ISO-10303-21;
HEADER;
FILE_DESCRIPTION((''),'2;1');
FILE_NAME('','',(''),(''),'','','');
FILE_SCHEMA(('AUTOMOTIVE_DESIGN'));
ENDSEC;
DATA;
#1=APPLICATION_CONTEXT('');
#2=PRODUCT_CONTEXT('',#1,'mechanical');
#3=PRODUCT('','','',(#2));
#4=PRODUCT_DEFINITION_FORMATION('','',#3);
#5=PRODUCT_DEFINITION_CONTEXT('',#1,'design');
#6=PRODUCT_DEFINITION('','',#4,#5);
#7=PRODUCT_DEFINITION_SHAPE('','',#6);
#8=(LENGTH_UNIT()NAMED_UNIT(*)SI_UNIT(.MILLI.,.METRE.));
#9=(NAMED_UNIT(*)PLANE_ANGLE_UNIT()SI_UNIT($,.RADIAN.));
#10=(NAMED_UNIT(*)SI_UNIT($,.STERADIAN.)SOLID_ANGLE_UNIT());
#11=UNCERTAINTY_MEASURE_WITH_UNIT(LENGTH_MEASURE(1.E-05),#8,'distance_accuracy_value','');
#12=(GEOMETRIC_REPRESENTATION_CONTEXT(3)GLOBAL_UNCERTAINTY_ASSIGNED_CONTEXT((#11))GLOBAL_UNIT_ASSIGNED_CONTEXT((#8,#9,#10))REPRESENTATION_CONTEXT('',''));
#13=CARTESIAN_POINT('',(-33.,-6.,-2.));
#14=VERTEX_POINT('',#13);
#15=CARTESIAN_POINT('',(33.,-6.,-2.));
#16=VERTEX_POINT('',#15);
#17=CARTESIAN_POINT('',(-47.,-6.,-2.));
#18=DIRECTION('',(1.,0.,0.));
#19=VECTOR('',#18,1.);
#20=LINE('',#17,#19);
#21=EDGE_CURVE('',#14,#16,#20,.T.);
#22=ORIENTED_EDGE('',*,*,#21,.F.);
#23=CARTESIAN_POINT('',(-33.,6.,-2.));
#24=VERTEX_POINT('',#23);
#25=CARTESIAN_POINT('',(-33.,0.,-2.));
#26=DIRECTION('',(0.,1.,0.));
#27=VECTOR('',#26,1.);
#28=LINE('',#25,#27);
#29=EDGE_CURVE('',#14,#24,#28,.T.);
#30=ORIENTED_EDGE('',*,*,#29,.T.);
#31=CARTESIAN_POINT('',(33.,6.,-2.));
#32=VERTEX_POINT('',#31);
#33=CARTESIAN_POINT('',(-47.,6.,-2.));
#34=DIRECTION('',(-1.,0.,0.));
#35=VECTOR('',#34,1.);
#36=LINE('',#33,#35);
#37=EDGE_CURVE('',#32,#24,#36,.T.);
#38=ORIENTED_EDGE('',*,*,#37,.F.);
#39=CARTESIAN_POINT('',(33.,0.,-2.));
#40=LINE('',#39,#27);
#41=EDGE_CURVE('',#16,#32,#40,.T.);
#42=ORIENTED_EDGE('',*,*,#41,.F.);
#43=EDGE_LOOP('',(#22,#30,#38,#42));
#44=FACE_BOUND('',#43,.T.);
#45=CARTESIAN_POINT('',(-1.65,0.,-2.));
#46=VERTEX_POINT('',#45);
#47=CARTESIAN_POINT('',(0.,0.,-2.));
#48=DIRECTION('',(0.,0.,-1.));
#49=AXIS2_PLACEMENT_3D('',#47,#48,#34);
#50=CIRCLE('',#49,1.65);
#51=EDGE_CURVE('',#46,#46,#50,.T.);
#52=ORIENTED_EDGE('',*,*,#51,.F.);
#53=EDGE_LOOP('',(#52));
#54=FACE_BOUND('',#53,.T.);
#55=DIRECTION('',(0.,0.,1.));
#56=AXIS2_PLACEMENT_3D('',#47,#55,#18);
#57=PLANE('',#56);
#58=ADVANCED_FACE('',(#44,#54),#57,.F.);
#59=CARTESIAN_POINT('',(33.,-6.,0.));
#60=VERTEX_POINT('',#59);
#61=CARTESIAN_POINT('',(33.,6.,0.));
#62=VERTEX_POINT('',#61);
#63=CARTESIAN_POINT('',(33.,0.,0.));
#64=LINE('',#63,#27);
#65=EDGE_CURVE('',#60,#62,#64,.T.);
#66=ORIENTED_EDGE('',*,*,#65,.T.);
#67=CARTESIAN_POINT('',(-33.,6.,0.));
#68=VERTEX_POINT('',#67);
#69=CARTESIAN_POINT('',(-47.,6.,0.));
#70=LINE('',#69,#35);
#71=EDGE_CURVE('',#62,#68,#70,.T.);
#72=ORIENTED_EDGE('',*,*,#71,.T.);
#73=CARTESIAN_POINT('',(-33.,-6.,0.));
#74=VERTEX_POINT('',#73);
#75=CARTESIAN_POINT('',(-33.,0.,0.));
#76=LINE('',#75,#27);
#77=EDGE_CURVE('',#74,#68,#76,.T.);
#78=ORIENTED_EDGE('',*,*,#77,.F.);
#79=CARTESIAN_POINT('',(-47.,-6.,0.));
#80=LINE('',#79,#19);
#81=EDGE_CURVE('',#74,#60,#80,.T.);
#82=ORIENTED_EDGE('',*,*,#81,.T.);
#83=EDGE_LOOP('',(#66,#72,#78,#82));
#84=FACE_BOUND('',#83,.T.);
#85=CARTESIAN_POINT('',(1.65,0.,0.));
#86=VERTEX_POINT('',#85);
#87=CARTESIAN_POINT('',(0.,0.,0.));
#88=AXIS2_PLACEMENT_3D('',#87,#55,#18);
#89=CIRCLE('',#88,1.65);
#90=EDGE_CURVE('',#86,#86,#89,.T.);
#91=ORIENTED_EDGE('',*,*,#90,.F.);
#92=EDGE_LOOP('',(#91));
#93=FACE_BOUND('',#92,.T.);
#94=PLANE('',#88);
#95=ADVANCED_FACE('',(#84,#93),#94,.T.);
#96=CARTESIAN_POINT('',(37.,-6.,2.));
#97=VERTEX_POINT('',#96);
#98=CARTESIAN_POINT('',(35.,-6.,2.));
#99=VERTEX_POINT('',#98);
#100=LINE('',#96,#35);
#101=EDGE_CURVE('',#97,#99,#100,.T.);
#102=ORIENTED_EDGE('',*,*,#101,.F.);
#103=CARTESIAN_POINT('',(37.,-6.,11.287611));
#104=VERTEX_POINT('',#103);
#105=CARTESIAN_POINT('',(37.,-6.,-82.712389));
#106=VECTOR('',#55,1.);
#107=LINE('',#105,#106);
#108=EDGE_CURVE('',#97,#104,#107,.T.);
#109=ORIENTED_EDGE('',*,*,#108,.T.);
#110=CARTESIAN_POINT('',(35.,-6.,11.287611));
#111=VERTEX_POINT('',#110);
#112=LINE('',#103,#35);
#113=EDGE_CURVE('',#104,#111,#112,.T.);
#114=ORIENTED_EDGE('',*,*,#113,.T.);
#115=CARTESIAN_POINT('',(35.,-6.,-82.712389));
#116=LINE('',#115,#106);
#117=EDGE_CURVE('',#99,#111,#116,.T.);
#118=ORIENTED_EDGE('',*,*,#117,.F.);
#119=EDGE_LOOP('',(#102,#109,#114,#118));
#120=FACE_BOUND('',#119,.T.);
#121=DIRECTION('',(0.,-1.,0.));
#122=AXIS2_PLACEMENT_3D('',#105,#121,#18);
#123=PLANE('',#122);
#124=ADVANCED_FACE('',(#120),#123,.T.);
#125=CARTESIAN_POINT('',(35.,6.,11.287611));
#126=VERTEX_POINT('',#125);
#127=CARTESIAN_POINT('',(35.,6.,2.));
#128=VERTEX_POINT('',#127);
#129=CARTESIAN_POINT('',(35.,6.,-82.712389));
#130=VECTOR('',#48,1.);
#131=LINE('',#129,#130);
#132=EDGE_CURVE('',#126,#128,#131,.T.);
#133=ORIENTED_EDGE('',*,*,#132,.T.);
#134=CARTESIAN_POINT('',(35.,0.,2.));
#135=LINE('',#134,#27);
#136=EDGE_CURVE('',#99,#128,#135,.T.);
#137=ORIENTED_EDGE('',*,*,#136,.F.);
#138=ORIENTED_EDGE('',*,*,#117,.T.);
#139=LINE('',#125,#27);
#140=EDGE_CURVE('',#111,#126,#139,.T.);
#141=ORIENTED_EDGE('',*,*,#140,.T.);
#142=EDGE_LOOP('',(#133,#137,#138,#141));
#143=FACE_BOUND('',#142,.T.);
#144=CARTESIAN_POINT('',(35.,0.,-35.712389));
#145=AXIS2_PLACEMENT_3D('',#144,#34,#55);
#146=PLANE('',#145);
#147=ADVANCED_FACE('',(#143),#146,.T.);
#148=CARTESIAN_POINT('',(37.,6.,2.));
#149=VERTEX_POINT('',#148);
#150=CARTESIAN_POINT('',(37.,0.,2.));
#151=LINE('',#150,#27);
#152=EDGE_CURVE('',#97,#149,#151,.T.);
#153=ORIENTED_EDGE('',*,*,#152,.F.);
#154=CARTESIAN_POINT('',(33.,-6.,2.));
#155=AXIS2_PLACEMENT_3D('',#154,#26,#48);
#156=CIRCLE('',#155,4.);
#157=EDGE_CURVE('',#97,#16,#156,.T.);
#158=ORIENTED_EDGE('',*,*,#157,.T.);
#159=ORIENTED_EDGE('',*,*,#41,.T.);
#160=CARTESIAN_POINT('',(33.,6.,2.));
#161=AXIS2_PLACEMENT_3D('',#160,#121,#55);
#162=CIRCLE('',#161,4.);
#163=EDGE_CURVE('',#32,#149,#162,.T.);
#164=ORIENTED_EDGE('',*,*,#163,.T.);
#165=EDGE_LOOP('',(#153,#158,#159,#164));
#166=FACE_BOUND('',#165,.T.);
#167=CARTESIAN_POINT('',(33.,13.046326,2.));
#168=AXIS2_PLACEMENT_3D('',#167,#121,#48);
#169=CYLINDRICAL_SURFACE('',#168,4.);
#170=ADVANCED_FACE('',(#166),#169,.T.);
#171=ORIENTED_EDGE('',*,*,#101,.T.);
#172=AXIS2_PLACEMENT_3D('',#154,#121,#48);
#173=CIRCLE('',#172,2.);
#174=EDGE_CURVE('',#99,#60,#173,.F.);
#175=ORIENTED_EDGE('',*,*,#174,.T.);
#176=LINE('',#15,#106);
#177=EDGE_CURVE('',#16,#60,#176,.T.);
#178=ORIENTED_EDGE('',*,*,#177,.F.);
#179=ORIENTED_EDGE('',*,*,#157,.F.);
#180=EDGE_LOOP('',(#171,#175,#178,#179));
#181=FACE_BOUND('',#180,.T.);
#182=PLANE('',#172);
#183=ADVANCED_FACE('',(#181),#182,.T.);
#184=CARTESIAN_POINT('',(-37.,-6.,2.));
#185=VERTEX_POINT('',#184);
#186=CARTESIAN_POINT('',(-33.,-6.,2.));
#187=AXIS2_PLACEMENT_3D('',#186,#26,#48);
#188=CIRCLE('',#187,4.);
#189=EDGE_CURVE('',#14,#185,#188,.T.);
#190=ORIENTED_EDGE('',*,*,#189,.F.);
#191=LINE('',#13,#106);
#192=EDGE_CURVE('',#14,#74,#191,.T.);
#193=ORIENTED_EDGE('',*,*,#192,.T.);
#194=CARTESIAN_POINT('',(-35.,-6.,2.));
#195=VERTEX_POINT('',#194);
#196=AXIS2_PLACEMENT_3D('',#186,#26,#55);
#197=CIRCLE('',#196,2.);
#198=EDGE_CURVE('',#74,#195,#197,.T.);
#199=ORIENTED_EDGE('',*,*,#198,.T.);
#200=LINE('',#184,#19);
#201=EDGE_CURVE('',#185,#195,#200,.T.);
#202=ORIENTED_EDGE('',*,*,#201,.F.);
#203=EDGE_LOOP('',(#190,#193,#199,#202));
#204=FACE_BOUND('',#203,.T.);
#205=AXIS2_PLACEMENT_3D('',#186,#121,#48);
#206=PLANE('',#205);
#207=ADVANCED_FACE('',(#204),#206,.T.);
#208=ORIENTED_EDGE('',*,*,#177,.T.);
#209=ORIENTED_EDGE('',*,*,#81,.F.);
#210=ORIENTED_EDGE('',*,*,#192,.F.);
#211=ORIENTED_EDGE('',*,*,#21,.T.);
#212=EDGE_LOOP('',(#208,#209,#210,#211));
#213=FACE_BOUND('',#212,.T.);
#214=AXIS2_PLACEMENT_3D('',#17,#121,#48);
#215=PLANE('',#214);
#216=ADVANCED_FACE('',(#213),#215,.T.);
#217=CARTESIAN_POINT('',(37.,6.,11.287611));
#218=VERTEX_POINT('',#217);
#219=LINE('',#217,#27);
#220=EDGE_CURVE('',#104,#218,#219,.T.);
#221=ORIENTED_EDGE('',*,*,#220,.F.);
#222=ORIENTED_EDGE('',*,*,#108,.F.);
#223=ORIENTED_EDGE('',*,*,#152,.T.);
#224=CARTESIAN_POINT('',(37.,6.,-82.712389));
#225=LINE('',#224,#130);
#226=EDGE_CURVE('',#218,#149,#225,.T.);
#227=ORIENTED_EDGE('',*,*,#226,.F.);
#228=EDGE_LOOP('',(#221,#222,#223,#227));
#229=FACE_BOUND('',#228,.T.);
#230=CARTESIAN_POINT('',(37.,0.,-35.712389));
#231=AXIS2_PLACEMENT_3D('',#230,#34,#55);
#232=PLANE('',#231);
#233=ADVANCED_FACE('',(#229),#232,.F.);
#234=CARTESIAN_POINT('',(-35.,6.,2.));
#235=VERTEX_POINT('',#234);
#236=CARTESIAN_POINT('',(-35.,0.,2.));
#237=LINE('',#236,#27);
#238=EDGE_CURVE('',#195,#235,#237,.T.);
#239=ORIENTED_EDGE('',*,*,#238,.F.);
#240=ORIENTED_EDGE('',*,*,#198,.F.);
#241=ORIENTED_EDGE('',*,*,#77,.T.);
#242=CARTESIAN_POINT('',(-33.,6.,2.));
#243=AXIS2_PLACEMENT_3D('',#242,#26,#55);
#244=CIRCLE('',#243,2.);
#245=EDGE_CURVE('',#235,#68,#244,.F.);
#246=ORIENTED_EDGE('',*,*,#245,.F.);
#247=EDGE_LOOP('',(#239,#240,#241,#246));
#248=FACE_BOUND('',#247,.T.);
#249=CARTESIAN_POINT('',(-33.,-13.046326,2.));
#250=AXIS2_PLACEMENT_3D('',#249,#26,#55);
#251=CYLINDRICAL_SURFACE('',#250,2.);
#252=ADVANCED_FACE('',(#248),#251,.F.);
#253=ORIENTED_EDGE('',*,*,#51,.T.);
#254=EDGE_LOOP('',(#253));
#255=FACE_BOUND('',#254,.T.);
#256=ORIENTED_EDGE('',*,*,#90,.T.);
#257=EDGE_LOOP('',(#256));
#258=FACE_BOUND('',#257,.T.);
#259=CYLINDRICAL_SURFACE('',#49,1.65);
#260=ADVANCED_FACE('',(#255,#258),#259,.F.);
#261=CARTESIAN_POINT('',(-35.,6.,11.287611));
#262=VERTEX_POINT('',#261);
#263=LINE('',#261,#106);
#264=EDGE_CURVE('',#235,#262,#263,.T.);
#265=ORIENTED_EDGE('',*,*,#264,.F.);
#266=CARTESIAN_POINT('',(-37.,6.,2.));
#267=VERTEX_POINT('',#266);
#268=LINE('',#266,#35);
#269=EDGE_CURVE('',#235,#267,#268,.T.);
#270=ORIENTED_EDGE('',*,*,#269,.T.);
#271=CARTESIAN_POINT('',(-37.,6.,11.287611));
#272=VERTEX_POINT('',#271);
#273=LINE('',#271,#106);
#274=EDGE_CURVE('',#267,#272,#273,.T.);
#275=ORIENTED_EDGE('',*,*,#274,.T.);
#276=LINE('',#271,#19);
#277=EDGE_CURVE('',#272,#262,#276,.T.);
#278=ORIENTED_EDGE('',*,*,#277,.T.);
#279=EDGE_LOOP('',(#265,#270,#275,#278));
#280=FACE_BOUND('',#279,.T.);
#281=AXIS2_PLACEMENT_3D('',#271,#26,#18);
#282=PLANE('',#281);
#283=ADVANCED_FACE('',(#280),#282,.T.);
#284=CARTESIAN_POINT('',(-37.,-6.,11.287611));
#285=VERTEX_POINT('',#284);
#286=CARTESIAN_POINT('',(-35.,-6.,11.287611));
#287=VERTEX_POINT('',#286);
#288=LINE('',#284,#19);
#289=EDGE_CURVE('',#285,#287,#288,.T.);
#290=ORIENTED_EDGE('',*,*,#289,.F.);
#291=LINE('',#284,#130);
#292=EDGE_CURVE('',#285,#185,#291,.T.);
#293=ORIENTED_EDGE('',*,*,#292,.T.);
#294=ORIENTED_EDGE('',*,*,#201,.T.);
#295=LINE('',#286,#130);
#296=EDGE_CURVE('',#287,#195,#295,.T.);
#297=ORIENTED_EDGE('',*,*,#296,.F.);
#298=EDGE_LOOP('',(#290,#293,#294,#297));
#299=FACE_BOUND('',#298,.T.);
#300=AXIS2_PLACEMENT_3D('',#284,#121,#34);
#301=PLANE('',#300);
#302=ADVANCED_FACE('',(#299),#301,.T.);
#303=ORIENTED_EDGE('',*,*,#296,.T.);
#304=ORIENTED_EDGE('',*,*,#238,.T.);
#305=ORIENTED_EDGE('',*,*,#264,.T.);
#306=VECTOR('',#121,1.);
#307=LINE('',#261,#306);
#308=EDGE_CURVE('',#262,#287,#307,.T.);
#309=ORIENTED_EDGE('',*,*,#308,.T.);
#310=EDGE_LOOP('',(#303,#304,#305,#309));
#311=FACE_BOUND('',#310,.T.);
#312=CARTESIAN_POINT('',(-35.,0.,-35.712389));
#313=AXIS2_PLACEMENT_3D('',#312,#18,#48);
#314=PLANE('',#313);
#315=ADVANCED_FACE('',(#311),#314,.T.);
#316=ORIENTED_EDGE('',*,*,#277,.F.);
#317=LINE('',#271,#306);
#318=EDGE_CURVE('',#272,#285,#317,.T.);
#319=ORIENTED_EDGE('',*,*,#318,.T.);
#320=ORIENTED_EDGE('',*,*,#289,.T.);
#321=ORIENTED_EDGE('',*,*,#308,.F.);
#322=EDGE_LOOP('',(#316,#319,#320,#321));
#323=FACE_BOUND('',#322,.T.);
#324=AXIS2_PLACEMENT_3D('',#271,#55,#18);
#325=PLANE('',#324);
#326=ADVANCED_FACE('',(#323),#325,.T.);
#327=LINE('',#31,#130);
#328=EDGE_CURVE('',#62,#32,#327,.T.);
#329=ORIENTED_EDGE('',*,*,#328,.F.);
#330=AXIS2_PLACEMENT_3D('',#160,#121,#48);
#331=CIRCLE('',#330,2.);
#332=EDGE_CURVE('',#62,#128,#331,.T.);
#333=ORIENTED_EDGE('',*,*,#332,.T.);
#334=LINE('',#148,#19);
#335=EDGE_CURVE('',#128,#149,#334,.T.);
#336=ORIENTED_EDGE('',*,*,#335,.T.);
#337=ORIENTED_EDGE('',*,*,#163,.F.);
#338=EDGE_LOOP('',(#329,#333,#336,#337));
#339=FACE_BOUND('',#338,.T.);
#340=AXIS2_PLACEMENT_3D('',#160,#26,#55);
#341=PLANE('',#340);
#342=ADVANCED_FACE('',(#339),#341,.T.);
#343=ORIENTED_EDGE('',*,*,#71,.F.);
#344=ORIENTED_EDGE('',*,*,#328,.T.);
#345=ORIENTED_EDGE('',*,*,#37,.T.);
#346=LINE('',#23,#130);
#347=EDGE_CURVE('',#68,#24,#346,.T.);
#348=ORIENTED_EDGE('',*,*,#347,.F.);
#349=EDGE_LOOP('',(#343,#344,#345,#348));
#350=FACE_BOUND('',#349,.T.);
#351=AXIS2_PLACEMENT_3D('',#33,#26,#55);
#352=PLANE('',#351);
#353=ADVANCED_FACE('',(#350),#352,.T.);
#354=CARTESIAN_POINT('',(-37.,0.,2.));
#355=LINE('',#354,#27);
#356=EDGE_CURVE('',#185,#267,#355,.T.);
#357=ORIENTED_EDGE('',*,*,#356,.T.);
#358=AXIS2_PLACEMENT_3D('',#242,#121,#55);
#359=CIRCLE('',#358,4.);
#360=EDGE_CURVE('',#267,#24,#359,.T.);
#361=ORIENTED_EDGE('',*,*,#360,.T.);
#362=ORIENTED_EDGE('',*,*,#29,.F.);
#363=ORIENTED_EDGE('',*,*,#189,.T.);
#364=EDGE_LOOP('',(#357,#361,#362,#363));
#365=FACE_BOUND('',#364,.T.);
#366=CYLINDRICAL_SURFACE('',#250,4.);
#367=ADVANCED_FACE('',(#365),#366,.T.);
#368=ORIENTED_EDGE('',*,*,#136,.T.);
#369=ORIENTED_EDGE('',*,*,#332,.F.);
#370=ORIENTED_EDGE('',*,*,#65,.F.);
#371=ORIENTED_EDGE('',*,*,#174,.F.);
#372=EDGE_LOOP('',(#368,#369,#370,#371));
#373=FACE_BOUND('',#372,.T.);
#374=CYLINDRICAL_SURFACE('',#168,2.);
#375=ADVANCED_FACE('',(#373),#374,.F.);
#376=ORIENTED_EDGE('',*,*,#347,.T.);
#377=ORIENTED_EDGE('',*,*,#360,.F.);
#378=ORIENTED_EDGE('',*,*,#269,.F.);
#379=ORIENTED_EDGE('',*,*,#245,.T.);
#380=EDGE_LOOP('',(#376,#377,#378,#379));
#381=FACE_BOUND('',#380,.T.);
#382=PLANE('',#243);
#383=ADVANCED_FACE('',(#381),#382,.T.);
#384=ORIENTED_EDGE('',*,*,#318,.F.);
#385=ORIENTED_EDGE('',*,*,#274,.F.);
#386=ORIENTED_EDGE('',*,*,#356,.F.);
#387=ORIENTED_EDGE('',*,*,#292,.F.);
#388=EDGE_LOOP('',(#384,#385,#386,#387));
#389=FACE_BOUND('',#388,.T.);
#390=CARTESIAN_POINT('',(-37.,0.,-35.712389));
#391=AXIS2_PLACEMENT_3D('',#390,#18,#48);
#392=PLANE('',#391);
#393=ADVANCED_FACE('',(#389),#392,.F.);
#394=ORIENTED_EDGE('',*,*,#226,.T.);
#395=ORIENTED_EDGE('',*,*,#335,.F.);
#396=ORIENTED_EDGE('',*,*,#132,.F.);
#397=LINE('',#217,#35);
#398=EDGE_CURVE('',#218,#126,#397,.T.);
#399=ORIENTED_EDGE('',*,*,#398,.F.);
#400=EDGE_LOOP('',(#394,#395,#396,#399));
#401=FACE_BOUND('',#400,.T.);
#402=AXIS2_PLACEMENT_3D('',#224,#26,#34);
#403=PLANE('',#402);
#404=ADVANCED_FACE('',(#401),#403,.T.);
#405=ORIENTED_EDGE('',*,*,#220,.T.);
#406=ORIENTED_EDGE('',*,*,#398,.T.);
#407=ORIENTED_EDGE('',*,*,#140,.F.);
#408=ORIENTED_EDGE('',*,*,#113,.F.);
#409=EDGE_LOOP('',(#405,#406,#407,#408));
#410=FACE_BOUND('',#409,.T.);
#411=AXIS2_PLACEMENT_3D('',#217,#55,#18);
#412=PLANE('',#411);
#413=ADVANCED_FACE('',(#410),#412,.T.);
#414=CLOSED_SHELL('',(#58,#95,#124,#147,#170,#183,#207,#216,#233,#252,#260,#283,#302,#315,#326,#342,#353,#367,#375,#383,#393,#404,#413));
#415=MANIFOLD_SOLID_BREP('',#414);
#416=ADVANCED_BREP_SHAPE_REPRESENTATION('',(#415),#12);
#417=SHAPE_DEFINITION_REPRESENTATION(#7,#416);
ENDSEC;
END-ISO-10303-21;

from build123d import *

# Parameters (mm, degrees)
ESBO_O1_W                                      = 94
ESBO_O1_H                                      = 12
FLANGE_BASE1_DEPTH                             = 2
DOBRA_START                                    = -6
DOBRA_ESBO_ADA1_DEPTH                          = 12
DOBRA_ESBO_ADA1_2_DEPTH                        = 12
BROCA_DE_ROSQUEAR_DE_CANO_PARA_TARRAXA_D_D     = 3.3
BROCA_DE_ROSQUEAR_DE_CANO_PARA_TARRAXA_D_DEPTH = 4
BROCA_DE_ROSQUEAR_DE_CANO_PARA_TARRAXA_D_TIP   = 0.991420021


# Read off the part's stored shape, not the designer's step: Dobra esboçada1
# Sheet-metal steps are written as plain solids
with BuildPart() as part:
    # Esboço1 → Flange-base1 (new body)
    with BuildSketch(Plane.XY):
        Rectangle(ESBO_O1_W, ESBO_O1_H)
    extrude(amount=-FLANGE_BASE1_DEPTH)

    # Dobra esboçada1 outline → Dobra esboçada1 (cut)
    with BuildSketch(Plane(origin=(0, 0, 0), x_dir=(1, 0, 0), z_dir=(0, 1, 0)).offset(DOBRA_START)):
        with BuildLine():
            ThreePointArc((-36.464101616, 0), (-35, 1.464101615), (-33, 2))
            Line((-33, 2), (-47, 2))
            Line((-47, 2), (-47, 0))
            Line((-47, 0), (-36.464101616, 0))
        make_face()
        with BuildLine():
            Line((47, 2), (33, 2))
            ThreePointArc((33, 2), (35, 1.464101615), (36.464101616, 0))
            Line((36.464101616, 0), (47, 0))
            Line((47, 0), (47, 2))
        make_face()
    extrude(amount=DOBRA_ESBO_ADA1_DEPTH, mode=Mode.SUBTRACT)

    # Dobra esbo_ada1 2 outline → Dobra esbo_ada1 2 (add)
    with BuildSketch(Plane(origin=(0, 0, 0), x_dir=(1, 0, 0), z_dir=(0, 1, 0)).offset(DOBRA_START)):
        with BuildLine():
            Line((-33, 0), (-36.464101616, 0))
            ThreePointArc((-36.464101616, 0), (-36.863703305, -0.96472382), (-37, -2))
            Line((-37, -2), (-37, -11.28761102))
            Line((-37, -11.28761102), (-35, -11.28761102))
            Line((-35, -11.28761102), (-35, -2))
            ThreePointArc((-35, -2), (-34.414213562, -0.585786438), (-33, 0))
        make_face()
        with BuildLine():
            ThreePointArc((37, -2), (36.863703305, -0.96472382), (36.464101616, 0))
            Line((36.464101616, 0), (33, 0))
            ThreePointArc((33, 0), (34.414213562, -0.585786438), (35, -2))
            Line((35, -2), (35, -11.28761102))
            Line((35, -11.28761102), (37, -11.28761102))
            Line((37, -11.28761102), (37, -2))
        make_face()
    extrude(amount=DOBRA_ESBO_ADA1_2_DEPTH)

    # Broca de rosquear de cano para tarraxa de 1/81
    with Locations(Plane(origin=(0, 0, -2), x_dir=(-1, 0, 0), z_dir=(0, 0, -1))):
        with Locations((0, 0)):
            Hole(BROCA_DE_ROSQUEAR_DE_CANO_PARA_TARRAXA_D_D / 2, depth=BROCA_DE_ROSQUEAR_DE_CANO_PARA_TARRAXA_D_DEPTH)
            with Locations((0, 0, -(BROCA_DE_ROSQUEAR_DE_CANO_PARA_TARRAXA_D_DEPTH + BROCA_DE_ROSQUEAR_DE_CANO_PARA_TARRAXA_D_TIP / 2))):  # 118° drill point
                Cone(0, BROCA_DE_ROSQUEAR_DE_CANO_PARA_TARRAXA_D_D / 2, BROCA_DE_ROSQUEAR_DE_CANO_PARA_TARRAXA_D_TIP, mode=Mode.SUBTRACT)


solid = part.part
